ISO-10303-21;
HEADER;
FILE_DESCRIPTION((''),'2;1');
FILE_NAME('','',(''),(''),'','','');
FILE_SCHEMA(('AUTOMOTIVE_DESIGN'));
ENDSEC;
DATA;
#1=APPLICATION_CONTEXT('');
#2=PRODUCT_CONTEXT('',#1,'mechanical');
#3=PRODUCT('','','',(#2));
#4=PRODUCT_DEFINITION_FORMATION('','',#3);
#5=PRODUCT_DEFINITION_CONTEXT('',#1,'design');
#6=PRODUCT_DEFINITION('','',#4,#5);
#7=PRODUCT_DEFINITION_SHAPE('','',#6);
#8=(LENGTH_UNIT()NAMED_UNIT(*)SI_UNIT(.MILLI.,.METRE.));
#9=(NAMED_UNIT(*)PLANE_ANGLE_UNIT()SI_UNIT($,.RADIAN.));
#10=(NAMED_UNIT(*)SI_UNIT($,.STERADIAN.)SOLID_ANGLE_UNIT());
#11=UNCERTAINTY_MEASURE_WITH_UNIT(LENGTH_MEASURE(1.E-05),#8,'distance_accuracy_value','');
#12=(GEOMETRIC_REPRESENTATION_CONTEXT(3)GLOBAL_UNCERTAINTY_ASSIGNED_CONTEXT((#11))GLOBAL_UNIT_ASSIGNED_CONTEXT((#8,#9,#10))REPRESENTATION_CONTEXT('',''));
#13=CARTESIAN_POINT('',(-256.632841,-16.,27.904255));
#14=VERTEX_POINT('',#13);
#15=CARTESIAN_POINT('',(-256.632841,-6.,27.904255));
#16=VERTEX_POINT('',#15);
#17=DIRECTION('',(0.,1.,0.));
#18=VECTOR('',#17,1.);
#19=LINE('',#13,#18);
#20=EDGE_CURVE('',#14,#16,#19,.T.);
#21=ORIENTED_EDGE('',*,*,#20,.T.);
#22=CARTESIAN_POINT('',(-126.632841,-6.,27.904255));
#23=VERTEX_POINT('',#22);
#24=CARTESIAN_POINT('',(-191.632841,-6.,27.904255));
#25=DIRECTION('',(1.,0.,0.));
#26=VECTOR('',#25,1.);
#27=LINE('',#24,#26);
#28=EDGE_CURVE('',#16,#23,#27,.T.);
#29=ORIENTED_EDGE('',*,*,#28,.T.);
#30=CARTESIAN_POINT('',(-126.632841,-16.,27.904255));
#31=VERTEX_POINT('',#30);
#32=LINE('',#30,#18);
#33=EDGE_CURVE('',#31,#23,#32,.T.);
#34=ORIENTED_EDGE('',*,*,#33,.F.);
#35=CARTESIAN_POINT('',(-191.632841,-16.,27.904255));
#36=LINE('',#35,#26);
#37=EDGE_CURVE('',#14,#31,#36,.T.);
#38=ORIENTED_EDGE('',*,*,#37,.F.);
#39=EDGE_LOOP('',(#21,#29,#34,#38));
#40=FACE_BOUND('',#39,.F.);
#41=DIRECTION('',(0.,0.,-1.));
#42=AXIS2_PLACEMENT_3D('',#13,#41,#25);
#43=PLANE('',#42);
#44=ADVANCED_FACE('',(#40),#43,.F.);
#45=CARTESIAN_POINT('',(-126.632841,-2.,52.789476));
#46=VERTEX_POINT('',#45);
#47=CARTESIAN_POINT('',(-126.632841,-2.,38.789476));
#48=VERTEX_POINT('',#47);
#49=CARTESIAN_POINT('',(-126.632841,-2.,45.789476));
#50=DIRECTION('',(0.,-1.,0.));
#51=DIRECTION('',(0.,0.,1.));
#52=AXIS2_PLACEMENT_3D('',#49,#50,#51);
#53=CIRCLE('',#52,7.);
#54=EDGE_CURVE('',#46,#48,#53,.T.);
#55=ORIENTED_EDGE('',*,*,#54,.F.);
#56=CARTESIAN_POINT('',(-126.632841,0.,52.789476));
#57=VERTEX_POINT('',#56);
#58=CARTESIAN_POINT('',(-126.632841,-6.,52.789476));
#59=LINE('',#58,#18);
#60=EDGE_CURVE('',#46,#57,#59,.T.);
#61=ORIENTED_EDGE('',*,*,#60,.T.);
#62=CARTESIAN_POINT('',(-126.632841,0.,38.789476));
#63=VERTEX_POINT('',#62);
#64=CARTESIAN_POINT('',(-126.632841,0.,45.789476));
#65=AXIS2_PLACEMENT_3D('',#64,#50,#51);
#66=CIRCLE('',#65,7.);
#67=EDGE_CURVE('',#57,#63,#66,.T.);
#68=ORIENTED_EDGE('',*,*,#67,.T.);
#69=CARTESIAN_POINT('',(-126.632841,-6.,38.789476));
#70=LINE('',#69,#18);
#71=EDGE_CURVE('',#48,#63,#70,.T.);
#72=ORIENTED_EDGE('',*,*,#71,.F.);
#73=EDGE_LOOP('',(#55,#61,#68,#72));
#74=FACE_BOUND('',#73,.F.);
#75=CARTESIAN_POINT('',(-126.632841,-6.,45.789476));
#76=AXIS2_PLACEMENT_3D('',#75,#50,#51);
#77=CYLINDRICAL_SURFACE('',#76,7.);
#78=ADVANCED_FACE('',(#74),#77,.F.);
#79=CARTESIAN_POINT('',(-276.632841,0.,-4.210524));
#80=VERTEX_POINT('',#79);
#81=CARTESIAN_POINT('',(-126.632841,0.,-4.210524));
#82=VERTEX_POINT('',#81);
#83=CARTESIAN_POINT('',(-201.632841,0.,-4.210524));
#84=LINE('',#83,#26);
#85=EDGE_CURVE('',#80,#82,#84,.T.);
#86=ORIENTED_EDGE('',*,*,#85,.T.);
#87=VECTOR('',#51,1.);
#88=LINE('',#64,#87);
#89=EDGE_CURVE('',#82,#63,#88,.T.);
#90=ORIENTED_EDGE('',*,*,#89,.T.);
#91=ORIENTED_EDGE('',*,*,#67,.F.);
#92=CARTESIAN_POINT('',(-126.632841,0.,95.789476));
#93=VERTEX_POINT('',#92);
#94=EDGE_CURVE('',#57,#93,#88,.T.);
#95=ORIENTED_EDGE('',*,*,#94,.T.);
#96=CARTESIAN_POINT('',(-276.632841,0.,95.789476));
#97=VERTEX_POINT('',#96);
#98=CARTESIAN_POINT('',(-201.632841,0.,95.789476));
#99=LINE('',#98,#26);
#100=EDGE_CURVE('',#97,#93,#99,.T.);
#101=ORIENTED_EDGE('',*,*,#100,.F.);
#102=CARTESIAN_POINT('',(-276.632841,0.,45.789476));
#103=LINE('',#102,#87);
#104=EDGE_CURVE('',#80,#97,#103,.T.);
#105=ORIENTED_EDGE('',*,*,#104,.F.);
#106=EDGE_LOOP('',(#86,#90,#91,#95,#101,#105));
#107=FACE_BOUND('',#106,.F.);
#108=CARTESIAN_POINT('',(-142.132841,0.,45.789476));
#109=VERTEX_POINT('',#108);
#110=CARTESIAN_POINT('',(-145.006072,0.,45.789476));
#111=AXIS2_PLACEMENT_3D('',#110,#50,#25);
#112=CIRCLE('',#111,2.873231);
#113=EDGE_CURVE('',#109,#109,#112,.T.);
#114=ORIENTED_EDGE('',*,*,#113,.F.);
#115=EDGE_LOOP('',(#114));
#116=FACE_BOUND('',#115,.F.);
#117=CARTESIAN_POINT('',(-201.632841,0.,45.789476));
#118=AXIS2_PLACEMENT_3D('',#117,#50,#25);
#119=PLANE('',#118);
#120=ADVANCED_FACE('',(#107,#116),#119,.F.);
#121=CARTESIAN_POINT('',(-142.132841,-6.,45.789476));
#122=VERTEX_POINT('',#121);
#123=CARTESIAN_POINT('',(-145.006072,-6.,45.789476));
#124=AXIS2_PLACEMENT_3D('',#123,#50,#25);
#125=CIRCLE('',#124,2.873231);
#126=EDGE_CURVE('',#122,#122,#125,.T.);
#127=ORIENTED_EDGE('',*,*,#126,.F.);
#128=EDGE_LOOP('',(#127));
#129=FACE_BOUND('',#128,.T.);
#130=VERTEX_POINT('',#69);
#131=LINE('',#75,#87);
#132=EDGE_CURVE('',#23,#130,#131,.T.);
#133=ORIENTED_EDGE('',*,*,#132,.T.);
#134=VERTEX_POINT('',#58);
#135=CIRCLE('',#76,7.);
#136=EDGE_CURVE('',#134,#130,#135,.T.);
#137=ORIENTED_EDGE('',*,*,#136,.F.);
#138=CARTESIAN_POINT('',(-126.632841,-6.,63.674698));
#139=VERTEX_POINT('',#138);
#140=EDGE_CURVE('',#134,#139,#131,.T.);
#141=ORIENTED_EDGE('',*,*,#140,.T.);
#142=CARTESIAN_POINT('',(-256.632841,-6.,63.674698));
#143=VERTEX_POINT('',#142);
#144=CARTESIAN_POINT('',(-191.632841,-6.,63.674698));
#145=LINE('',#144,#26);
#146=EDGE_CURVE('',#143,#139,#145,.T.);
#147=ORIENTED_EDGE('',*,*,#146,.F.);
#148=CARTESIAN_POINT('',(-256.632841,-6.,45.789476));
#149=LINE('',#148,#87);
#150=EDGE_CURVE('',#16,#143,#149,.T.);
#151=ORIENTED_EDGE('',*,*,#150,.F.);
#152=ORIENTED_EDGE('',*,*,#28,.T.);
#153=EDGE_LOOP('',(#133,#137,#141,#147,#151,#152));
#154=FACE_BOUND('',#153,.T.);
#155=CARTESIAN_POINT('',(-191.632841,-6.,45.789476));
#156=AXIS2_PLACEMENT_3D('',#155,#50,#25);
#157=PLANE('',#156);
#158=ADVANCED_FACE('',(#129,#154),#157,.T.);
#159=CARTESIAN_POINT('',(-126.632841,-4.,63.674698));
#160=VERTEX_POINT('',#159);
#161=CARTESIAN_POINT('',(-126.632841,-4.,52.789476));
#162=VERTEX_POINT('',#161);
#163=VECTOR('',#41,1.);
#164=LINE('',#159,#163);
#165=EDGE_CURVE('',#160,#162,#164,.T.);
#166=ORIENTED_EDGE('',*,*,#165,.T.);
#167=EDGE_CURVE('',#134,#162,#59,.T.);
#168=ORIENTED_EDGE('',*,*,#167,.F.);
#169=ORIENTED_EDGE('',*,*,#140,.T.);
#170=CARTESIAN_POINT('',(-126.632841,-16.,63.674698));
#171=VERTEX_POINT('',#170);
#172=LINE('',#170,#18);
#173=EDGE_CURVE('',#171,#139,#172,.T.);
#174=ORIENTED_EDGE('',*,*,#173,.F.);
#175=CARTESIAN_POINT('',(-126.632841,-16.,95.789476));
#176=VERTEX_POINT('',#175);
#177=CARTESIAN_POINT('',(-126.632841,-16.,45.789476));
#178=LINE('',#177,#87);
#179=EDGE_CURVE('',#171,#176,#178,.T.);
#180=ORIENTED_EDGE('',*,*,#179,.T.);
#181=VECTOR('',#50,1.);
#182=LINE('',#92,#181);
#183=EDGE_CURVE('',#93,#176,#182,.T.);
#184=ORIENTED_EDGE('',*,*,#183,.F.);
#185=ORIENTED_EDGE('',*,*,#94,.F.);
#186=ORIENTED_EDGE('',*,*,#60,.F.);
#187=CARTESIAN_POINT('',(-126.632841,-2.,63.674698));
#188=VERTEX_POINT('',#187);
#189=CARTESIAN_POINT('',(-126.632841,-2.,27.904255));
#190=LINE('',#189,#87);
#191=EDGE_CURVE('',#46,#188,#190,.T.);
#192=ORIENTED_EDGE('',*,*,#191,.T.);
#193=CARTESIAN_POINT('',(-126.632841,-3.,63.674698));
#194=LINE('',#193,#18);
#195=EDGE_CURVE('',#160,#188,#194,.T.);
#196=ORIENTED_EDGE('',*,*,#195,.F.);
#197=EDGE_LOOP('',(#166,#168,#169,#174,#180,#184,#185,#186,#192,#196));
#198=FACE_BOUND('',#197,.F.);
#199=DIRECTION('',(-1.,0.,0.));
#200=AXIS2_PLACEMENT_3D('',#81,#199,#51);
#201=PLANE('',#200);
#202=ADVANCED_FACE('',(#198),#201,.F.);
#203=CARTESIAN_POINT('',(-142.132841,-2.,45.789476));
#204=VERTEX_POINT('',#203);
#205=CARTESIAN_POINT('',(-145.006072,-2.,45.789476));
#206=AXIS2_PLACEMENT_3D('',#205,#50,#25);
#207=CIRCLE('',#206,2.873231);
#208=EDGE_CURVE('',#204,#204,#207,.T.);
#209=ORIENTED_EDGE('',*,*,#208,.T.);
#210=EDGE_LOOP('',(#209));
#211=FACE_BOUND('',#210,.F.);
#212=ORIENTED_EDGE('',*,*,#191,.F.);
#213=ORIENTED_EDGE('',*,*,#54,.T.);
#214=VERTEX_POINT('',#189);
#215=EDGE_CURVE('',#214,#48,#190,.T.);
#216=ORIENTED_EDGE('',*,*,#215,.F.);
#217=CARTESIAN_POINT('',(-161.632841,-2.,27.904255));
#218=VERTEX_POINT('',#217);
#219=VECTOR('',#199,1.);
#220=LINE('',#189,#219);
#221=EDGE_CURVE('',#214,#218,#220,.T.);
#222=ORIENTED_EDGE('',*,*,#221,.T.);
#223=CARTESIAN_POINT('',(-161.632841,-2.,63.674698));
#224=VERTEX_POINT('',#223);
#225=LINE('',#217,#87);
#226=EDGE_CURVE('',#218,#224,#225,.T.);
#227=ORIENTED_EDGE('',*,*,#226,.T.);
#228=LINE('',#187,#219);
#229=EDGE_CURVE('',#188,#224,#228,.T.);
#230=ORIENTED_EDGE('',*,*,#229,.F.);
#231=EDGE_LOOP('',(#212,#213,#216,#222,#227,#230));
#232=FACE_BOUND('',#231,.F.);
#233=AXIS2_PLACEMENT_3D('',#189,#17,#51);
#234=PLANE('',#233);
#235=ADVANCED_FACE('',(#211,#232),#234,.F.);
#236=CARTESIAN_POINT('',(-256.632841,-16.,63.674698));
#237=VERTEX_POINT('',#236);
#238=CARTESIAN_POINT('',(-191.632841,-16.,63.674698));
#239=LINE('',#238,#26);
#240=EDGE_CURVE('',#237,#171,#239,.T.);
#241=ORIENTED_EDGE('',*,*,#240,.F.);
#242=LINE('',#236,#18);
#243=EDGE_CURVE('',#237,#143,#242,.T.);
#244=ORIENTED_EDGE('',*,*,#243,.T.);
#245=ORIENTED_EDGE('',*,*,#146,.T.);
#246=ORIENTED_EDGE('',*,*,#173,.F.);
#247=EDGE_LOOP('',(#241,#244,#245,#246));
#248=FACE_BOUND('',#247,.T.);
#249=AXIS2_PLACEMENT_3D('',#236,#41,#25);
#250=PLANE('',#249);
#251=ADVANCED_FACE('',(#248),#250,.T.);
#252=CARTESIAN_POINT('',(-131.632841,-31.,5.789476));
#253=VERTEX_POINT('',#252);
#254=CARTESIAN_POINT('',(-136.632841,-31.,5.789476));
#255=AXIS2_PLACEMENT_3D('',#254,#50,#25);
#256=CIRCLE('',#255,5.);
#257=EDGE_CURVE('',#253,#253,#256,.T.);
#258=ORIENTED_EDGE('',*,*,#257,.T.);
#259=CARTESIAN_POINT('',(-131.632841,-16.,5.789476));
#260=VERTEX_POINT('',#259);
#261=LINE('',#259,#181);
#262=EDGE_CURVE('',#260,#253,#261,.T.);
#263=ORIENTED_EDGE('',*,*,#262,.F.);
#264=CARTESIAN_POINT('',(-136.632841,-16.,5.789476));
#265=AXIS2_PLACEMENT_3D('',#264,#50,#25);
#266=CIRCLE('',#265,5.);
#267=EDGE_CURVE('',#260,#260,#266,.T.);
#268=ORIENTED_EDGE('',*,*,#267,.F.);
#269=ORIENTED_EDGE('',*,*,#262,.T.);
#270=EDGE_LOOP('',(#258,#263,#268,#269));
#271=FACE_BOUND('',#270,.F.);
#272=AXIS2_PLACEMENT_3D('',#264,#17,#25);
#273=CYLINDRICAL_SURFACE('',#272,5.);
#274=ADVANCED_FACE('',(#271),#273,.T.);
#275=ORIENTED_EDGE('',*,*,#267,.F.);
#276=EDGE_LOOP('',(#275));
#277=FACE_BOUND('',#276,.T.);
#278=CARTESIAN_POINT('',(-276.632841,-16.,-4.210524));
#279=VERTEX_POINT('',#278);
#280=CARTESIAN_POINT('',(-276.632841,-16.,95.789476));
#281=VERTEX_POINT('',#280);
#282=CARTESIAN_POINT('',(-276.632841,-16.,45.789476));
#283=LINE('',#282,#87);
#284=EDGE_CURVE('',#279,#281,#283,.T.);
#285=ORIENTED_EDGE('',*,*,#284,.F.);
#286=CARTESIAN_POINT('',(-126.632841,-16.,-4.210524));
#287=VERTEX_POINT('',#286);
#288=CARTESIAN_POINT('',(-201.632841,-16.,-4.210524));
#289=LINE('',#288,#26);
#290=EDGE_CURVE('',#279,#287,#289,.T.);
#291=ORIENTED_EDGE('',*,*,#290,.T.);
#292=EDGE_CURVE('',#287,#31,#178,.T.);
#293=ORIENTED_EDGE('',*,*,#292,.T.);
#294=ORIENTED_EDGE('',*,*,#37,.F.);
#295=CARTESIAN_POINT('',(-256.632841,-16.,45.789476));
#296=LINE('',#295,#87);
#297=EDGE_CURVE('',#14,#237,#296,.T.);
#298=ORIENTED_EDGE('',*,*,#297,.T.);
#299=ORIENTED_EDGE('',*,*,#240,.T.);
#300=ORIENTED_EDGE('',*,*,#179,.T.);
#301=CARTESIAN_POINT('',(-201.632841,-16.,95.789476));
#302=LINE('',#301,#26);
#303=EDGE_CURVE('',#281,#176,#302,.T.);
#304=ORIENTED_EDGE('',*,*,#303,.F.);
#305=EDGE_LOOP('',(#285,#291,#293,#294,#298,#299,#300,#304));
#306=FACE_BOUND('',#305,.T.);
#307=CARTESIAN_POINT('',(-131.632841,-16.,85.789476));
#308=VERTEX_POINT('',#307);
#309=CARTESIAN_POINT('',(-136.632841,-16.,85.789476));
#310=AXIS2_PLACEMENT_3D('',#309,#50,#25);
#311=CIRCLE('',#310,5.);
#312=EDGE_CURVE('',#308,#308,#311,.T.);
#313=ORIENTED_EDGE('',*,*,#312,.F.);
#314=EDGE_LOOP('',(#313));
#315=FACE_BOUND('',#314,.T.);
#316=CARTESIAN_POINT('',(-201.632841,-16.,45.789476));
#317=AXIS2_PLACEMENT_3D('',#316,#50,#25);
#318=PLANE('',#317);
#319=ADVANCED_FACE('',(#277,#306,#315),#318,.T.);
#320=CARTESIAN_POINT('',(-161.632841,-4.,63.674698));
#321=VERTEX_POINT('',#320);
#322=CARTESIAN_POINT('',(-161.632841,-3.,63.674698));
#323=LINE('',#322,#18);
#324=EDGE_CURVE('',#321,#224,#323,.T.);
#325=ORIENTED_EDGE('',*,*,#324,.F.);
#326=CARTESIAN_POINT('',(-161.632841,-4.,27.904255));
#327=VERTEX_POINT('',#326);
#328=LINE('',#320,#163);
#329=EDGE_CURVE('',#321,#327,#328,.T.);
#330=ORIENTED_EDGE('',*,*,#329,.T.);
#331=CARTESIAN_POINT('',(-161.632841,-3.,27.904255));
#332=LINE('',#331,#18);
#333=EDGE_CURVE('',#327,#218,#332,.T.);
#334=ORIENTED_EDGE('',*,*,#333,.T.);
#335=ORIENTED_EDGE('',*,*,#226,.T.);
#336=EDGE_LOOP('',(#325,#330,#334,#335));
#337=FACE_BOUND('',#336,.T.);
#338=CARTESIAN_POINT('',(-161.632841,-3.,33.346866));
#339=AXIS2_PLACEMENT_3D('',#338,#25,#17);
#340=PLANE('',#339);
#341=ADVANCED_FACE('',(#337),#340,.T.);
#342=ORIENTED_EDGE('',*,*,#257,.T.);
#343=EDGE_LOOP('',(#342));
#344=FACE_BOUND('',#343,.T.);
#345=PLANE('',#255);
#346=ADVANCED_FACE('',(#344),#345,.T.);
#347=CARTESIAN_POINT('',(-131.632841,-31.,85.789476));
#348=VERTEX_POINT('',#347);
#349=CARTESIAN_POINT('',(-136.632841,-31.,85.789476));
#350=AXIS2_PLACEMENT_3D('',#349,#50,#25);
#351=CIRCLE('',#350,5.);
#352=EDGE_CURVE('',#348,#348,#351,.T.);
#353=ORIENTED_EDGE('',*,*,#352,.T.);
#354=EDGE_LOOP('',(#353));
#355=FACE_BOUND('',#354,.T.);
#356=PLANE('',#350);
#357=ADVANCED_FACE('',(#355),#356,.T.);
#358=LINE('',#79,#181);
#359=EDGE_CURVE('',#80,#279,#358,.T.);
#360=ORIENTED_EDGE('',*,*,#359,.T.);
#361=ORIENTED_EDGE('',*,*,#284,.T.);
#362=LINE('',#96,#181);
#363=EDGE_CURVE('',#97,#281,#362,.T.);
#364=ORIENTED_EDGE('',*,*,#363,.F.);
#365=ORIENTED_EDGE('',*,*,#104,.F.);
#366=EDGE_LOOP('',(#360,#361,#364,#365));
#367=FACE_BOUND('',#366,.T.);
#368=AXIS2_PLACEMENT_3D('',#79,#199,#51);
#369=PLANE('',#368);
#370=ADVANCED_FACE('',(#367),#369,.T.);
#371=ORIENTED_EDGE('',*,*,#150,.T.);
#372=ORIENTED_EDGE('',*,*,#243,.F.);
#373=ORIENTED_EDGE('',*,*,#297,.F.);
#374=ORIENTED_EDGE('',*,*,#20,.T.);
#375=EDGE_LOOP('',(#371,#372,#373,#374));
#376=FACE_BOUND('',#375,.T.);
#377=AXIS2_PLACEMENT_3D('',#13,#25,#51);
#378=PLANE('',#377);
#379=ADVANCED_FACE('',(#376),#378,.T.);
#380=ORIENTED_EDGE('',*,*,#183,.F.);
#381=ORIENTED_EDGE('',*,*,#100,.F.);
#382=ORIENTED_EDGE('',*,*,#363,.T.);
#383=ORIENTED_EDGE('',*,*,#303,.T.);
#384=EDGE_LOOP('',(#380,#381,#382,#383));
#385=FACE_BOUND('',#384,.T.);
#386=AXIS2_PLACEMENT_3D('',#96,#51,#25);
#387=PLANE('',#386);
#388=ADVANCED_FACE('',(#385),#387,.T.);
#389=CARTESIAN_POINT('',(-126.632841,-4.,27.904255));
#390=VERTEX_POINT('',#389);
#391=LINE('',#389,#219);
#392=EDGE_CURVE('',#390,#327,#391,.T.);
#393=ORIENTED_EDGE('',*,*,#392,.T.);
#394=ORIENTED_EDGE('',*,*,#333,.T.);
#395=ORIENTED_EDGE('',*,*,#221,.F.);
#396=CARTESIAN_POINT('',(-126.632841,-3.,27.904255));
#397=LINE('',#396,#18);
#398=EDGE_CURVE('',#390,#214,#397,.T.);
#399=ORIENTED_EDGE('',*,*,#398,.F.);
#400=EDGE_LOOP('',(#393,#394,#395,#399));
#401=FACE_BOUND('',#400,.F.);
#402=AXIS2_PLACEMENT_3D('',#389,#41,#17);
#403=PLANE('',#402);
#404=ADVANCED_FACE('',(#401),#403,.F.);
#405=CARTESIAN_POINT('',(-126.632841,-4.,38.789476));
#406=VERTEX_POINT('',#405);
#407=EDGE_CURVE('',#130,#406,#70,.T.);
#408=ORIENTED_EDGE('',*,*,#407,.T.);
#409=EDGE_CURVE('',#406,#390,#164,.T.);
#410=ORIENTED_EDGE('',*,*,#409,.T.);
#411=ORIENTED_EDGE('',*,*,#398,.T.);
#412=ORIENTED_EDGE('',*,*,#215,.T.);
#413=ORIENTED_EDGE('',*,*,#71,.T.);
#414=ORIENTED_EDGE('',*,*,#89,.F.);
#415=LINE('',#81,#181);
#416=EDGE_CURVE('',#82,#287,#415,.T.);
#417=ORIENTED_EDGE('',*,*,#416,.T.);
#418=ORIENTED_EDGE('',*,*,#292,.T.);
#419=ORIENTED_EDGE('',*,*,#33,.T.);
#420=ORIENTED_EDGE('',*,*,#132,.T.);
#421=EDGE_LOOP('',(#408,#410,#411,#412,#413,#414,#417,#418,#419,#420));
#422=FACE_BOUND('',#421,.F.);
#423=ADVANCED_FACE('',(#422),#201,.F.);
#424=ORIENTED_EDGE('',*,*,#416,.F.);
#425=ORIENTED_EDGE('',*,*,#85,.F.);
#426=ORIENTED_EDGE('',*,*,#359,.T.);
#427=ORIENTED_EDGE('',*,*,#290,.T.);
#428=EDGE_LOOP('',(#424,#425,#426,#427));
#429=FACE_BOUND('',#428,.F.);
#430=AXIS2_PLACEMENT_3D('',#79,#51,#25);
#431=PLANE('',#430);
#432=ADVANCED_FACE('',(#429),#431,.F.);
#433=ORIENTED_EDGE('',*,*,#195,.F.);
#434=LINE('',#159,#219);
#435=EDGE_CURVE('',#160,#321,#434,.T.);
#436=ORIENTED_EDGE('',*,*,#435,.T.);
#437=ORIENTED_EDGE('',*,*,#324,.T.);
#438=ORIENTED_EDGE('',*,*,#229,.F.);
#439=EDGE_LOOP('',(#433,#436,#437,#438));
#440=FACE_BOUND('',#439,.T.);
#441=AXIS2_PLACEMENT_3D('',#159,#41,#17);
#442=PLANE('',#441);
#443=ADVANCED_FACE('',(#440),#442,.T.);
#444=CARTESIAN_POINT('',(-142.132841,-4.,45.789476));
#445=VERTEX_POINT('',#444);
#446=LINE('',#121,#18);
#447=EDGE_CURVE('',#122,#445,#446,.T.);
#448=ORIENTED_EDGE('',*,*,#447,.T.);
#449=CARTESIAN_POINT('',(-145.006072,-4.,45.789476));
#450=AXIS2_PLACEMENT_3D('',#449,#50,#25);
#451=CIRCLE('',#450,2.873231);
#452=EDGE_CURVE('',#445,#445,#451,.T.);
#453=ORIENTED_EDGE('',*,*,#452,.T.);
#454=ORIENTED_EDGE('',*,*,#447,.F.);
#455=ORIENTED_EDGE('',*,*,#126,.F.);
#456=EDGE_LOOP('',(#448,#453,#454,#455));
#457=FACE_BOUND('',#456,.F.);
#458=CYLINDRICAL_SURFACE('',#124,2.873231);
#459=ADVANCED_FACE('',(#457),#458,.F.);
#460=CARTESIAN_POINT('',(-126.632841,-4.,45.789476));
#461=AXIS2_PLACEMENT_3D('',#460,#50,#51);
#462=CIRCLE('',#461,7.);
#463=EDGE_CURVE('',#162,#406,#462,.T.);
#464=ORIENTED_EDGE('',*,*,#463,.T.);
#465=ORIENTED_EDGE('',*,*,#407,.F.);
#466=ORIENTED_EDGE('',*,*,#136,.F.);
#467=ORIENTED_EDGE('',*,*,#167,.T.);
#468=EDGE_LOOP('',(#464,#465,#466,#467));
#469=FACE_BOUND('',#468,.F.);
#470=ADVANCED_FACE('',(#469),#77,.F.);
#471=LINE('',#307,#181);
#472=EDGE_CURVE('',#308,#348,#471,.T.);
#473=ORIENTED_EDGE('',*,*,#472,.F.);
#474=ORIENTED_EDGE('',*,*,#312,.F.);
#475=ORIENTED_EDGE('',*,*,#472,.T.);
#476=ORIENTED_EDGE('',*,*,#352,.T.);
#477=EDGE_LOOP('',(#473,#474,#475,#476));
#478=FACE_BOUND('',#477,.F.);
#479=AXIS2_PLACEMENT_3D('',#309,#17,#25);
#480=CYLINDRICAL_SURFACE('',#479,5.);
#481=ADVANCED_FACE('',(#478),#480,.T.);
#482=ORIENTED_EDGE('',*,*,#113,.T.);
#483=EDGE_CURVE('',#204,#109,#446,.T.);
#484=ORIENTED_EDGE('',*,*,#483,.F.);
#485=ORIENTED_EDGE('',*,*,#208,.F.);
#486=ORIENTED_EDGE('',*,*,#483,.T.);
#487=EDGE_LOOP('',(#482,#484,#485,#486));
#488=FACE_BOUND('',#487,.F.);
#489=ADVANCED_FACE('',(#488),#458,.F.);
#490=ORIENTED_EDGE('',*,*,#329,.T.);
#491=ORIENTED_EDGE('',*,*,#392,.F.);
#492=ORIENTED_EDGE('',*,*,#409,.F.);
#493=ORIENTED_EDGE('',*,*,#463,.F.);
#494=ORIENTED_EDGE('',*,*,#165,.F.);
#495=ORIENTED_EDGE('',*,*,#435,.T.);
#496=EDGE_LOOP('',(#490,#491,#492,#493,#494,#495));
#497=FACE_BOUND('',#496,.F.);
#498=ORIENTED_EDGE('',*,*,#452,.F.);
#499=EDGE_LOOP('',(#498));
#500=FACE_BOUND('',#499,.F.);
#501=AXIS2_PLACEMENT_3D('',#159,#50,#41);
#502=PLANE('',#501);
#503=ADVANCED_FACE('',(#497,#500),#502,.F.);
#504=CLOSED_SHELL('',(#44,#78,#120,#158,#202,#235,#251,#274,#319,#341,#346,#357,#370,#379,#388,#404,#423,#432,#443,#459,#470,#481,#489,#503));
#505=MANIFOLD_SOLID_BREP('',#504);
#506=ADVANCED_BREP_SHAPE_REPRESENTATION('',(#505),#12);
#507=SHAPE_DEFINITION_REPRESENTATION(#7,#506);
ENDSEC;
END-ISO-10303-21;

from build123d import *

# Parameters (mm, degrees)
F0_W     = 150
F0_H     = 100
F1_DEPTH = 16
F2_R     = 5
F3_DEPTH = 15
F4_W     = 130
F4_H     = 35.7704423368
F5_DEPTH = 10
F6_R     = 2.8732308489
F7_DEPTH = 7
F8_W     = 2
F8_H     = 10.8852211684
F8_H_2   = 14
F9_DEPTH = 35


with BuildPart() as f1:
    # F0 (on Front) → F1 (new body)
    with BuildSketch(Plane.XZ):
        with Locations((-201.6328409241, 45.7894764841)):
            Rectangle(F0_W, F0_H)
    extrude(amount=F1_DEPTH)

    # F2 (on face) → F3 (join)
    with BuildSketch(Plane.XZ.offset(16)):
        with Locations((-136.6328409241, 85.7894764841)):
            Circle(F2_R)
        with Locations((-136.6328409241, 5.7894764841)):
            Circle(F2_R)
    extrude(amount=F3_DEPTH)

    # F4 (on face) → F5 (cut)
    with BuildSketch(Plane.XZ.offset(16)):
        with Locations((-191.6328409241, 45.7894764841)):
            Rectangle(F4_W, F4_H)
    extrude(amount=-F5_DEPTH, mode=Mode.SUBTRACT)

    # F6 (on face) → F7 (cut)
    with BuildSketch(Plane.XZ.offset(6)):
        with Locations((-145.006071773, 45.7894764841)):
            Circle(F6_R)
        with BuildLine():
            Line((-126.6328409241, 38.7894764841), (-126.6328409241, 52.7894764841))
            ThreePointArc((-126.6328409241, 52.7894764841), (-133.6328409241, 45.7894764841), (-126.6328409241, 38.7894764841))
        make_face()
        with BuildLine():
            ThreePointArc((-126.6328409241, 38.7894764841), (-121.6830934558, 40.8397290158), (-119.6328409241, 45.7894764841))
            ThreePointArc((-119.6328409241, 45.7894764841), (-121.6830934558, 50.7392239524), (-126.6328409241, 52.7894764841))
            Line((-126.6328409241, 52.7894764841), (-126.6328409241, 38.7894764841))
        make_face()
    extrude(amount=-F7_DEPTH, mode=Mode.SUBTRACT)

    # F8 (on face) → F9 (cut)
    with BuildSketch(Plane.YZ.offset(-126.6328409241)):
        with Locations((-3, 33.3468658999)):
            Rectangle(F8_W, F8_H)
        with Locations((-3, 45.7894764841)):
            Rectangle(F8_W, F8_H_2)
        with Locations((-3, 58.2320870683)):
            Rectangle(F8_W, F8_H)
    extrude(amount=-F9_DEPTH, mode=Mode.SUBTRACT)


solid = f1.part
